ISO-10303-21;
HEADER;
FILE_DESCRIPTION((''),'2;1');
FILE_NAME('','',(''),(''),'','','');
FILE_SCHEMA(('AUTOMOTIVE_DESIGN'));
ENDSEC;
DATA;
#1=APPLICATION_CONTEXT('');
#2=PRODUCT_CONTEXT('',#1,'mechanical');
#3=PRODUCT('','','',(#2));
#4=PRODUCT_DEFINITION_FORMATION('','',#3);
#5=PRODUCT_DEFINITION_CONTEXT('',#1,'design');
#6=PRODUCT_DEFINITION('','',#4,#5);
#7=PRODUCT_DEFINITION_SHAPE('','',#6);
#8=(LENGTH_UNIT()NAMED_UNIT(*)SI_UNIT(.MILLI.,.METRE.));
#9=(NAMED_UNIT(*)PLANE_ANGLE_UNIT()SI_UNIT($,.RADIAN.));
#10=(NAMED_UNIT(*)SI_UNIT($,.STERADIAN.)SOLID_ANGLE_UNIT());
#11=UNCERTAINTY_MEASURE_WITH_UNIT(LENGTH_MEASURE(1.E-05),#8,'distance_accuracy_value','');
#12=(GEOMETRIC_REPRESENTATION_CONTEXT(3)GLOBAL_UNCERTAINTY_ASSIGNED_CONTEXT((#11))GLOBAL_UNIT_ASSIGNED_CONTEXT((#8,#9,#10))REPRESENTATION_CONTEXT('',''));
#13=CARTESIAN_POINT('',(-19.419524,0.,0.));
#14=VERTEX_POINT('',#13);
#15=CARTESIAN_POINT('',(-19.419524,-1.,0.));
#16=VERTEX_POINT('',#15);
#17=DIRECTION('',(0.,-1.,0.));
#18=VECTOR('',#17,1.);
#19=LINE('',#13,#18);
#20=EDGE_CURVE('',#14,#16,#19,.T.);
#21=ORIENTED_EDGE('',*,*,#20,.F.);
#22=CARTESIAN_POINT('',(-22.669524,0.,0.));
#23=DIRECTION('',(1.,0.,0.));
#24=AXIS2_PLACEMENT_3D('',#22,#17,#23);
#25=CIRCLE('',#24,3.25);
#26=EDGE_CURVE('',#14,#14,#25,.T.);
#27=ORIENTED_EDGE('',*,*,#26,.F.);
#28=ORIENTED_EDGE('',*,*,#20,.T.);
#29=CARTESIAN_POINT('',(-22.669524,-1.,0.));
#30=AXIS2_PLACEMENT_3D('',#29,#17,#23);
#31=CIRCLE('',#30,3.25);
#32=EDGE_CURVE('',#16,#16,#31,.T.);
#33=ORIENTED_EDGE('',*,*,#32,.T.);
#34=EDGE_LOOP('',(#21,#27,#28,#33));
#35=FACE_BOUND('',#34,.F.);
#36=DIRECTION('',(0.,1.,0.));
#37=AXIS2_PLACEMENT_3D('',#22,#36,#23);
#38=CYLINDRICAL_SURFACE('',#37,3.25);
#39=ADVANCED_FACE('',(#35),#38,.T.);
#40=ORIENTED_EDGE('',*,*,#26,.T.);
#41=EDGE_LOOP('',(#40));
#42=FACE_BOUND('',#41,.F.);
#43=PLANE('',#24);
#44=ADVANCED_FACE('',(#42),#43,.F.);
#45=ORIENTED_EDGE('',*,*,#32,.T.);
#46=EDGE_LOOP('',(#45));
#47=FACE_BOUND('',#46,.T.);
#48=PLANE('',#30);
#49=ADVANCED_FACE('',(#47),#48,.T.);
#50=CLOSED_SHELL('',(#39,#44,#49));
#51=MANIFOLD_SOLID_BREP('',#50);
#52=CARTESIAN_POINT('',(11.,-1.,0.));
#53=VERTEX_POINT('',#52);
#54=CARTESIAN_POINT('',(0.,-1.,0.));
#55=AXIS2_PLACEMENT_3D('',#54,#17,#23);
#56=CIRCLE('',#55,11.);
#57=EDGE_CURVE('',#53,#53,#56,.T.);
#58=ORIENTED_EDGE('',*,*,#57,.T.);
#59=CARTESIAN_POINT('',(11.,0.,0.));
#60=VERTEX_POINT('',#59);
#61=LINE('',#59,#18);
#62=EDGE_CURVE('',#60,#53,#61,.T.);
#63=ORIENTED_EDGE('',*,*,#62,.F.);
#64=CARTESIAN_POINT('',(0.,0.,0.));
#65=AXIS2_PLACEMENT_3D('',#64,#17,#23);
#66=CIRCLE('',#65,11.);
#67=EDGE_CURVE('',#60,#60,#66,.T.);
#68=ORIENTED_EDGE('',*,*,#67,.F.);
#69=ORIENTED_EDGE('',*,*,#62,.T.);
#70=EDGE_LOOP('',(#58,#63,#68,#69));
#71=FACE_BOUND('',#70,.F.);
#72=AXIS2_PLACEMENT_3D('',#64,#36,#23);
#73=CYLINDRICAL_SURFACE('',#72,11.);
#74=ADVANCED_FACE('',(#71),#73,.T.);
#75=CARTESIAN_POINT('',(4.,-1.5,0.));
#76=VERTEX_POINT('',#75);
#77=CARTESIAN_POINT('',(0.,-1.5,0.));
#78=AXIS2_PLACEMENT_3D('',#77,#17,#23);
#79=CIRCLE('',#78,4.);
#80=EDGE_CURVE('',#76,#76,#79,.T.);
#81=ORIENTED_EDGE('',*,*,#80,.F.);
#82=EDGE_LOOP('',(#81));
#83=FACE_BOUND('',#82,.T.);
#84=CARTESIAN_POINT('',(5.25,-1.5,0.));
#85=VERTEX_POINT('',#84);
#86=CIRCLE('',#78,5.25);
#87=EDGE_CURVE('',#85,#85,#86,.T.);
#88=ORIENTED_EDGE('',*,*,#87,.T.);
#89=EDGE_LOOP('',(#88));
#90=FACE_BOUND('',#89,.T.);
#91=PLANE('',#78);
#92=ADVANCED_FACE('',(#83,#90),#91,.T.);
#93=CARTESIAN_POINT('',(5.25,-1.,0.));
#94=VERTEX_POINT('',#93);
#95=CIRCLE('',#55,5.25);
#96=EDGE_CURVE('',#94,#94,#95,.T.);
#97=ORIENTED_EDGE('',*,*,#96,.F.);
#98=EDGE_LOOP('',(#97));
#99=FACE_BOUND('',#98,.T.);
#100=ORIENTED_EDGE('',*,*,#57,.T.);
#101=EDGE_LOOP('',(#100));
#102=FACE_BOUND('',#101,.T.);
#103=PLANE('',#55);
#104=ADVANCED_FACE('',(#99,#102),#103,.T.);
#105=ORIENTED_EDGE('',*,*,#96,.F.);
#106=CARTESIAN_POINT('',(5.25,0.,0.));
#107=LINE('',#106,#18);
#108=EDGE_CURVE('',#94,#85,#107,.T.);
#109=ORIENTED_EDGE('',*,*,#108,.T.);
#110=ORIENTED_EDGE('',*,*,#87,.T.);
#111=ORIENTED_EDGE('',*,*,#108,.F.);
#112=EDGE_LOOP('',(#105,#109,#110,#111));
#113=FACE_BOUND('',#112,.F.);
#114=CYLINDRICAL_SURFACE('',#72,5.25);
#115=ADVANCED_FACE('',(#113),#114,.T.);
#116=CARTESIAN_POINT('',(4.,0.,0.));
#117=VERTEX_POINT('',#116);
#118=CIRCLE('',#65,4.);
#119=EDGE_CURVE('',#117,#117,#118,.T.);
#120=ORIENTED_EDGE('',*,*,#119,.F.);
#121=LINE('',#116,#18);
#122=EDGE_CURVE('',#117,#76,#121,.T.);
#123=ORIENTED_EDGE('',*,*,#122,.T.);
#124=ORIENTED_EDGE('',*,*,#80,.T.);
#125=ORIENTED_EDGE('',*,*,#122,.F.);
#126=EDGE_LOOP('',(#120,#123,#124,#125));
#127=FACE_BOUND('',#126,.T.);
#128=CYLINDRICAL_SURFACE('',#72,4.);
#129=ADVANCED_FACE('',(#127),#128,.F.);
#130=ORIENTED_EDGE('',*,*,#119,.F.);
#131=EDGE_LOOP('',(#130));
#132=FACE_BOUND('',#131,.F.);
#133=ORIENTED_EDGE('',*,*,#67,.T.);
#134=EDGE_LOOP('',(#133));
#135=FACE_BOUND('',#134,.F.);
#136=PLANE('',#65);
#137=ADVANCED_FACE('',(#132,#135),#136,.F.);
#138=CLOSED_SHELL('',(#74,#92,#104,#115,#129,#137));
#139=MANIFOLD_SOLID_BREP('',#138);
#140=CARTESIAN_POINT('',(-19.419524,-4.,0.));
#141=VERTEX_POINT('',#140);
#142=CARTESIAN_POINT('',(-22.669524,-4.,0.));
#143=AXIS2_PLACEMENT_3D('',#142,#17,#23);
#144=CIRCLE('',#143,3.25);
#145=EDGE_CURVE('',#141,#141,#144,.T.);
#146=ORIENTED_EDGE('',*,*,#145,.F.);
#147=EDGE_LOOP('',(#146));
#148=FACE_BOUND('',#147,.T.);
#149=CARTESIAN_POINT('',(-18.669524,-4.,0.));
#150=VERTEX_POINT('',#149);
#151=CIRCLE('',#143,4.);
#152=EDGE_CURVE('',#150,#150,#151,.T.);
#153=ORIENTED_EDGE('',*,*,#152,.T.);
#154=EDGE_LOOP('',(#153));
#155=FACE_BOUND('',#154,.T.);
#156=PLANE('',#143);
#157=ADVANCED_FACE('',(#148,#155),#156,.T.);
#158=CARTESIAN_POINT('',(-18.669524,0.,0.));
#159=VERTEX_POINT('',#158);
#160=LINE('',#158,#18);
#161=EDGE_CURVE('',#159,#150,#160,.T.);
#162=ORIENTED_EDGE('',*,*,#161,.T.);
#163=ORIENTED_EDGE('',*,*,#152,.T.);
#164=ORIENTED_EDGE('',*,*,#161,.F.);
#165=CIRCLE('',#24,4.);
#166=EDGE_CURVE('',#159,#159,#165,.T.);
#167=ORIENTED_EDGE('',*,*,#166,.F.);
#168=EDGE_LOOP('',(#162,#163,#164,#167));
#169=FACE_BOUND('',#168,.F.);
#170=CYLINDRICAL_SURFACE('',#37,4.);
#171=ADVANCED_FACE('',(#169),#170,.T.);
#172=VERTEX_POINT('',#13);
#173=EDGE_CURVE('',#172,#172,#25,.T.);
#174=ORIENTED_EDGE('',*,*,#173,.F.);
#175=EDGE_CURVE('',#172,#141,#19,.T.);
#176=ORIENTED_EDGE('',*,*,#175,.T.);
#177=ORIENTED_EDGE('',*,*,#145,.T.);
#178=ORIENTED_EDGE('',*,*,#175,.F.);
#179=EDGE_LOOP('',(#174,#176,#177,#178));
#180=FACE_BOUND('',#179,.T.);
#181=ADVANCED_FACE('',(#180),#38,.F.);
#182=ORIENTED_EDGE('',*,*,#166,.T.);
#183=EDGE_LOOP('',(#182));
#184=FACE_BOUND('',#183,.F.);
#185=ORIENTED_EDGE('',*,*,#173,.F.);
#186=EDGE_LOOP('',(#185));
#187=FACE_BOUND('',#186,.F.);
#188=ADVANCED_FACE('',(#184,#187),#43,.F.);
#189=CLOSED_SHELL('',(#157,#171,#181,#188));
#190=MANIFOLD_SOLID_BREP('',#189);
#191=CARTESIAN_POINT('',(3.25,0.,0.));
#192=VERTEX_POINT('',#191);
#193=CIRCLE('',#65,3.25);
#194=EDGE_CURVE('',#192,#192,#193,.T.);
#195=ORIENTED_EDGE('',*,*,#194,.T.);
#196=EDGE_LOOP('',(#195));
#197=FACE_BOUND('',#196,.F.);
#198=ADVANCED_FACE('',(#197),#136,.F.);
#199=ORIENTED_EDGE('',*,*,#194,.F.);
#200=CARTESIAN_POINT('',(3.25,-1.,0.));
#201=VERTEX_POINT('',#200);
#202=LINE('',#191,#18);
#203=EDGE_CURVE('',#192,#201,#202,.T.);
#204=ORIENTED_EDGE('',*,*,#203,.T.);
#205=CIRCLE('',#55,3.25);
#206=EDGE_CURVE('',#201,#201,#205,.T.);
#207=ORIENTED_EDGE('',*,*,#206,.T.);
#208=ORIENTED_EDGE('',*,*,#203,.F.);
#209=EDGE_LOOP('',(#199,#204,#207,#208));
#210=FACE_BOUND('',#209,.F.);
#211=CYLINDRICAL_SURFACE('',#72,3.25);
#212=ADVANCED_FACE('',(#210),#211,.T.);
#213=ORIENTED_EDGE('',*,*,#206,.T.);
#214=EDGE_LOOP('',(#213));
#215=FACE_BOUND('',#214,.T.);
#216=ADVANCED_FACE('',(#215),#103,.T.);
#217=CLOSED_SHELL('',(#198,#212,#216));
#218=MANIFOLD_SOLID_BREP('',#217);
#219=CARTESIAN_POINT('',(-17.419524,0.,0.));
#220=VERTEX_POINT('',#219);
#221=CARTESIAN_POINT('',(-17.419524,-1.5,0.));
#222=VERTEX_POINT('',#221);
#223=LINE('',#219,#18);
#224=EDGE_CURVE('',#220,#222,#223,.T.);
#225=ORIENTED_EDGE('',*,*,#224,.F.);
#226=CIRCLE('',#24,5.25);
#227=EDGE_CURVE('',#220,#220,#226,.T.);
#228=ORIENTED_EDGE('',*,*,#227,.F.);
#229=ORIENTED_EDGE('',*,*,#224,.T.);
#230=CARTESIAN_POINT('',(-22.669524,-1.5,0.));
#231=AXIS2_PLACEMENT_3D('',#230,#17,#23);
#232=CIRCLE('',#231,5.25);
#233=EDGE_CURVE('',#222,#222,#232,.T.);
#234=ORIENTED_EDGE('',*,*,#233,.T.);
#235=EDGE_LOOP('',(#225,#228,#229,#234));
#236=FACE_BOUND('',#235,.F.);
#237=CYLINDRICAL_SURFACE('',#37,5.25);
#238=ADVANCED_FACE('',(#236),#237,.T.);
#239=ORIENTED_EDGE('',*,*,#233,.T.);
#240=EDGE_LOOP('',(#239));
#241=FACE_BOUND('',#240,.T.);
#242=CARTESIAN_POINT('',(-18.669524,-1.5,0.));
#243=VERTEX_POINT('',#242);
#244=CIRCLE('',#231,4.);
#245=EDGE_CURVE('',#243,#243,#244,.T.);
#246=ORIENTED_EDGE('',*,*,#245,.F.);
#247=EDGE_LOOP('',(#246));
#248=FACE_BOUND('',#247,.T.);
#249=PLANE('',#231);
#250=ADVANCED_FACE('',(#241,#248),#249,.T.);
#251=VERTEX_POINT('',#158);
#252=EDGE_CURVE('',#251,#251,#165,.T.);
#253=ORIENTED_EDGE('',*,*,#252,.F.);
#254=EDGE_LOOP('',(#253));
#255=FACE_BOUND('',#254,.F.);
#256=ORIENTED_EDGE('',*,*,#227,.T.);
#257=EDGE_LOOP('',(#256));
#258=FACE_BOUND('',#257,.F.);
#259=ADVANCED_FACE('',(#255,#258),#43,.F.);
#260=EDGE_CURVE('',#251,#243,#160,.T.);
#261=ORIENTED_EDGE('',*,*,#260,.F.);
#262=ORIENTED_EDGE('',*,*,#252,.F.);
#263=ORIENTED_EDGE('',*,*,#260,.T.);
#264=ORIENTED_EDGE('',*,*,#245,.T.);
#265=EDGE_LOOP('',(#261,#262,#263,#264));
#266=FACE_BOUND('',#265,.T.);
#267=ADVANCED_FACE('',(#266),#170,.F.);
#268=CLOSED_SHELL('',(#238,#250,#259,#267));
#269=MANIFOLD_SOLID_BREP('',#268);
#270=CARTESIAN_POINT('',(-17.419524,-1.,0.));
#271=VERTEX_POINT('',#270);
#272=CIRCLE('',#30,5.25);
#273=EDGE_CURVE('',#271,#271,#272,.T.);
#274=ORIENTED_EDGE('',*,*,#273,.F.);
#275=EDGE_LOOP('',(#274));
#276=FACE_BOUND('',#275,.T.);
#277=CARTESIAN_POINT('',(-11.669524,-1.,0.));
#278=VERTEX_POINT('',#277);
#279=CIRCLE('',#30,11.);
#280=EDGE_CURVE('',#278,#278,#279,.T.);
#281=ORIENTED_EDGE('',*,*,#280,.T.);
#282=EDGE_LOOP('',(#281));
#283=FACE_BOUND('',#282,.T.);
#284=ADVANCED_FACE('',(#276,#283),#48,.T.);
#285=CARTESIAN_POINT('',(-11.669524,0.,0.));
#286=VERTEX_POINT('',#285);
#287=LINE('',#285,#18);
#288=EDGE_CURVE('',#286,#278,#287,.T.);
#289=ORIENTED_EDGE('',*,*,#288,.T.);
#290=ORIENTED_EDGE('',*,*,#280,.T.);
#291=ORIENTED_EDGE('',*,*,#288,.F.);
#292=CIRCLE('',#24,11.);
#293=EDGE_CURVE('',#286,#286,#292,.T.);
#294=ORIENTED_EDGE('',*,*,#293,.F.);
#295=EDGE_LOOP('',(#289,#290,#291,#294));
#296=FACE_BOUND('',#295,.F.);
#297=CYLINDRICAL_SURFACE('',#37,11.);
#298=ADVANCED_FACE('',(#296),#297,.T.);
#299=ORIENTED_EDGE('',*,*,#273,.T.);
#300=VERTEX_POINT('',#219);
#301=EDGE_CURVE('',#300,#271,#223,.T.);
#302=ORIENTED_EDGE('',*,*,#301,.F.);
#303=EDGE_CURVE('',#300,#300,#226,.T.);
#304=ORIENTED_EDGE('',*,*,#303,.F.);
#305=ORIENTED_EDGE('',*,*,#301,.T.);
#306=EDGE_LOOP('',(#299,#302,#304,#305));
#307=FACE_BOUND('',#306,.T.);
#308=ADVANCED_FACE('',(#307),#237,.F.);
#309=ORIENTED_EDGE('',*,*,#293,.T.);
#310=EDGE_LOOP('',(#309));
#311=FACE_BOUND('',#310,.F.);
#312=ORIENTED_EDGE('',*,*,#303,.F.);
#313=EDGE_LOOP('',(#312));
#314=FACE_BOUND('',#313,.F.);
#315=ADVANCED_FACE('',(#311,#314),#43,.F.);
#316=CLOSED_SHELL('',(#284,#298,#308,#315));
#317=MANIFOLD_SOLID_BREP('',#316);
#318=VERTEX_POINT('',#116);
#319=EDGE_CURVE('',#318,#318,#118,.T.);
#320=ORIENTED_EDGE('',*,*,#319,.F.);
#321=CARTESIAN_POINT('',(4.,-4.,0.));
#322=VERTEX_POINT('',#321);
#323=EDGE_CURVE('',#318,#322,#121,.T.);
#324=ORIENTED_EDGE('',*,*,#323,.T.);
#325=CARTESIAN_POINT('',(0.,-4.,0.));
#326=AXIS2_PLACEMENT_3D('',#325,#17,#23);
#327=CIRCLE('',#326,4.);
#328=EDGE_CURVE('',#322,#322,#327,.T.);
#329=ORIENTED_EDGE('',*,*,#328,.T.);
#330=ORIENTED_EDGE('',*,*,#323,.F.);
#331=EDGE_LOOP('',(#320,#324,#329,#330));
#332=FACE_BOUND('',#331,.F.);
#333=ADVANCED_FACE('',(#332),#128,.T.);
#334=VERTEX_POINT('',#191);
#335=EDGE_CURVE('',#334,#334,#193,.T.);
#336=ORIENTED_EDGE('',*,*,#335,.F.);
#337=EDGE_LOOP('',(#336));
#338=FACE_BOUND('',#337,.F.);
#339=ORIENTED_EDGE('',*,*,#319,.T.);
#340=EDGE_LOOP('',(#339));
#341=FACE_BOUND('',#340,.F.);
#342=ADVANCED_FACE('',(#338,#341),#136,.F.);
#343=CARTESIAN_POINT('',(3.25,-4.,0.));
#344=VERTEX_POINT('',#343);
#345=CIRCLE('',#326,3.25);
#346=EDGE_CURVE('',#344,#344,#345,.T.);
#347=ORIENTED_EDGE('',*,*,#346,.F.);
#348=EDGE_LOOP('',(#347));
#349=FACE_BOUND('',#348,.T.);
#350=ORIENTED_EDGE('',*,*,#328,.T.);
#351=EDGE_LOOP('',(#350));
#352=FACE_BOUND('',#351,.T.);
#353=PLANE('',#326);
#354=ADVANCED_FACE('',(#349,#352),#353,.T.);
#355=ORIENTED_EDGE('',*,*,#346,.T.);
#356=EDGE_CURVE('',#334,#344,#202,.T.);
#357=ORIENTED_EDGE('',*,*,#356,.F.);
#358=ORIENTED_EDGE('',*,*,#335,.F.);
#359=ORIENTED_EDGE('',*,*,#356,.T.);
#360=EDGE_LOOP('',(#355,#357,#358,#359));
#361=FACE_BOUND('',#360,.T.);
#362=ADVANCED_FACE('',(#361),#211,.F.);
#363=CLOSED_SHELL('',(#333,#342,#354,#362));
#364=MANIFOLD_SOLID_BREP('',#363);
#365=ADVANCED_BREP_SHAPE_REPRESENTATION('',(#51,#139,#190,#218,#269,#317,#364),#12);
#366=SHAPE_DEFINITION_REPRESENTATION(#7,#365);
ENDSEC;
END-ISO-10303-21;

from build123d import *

# Parameters (mm, degrees)
F0_R     = 11
F0_R_2   = 5.25
F1_DEPTH = 1
F0_R_3   = 3.25
F0_R_4   = 4
F2_DEPTH = 1.5
F3_DEPTH = 4


with BuildPart() as f1:
    # F0 (on Front) → F1 (new body)
    with BuildSketch(Plane.XZ):
        Circle(F0_R)
        Circle(F0_R_2, mode=Mode.SUBTRACT)
    extrude(amount=F1_DEPTH)

    # F0 (on Front) → F2 (join)
    with BuildSketch(Plane.XZ):
        Circle(F0_R_2)
        Circle(F0_R_4, mode=Mode.SUBTRACT)
    extrude(amount=F2_DEPTH)


with BuildPart() as f1b:
    # F0 (on Front) → F1, piece 2 (new body)
    with BuildSketch(Plane.XZ):
        Circle(F0_R_3)
    extrude(amount=F1_DEPTH)


with BuildPart() as f1c:
    # F0 (on Front) → F1, piece 3 (new body)
    with BuildSketch(Plane.XZ):
        with Locations((-22.6695239544, 0)):
            Circle(F0_R)
        with Locations((-22.6695239544, 0)):
            Circle(F0_R_2, mode=Mode.SUBTRACT)
    extrude(amount=F1_DEPTH)


with BuildPart() as f1d:
    # F0 (on Front) → F1, piece 4 (new body)
    with BuildSketch(Plane.XZ):
        with Locations((-22.6695239544, 0)):
            Circle(F0_R_3)
    extrude(amount=F1_DEPTH)


with BuildPart() as f2:
    # F0 (on Front) → F2, piece 2 (new body)
    with BuildSketch(Plane.XZ):
        with Locations((-22.6695239544, 0)):
            Circle(F0_R_2)
        with Locations((-22.6695239544, 0)):
            Circle(F0_R_4, mode=Mode.SUBTRACT)
    extrude(amount=F2_DEPTH)


with BuildPart() as f3:
    # F0 (on Front) → F3 (new body)
    with BuildSketch(Plane.XZ):
        Circle(F0_R_4)
        Circle(F0_R_3, mode=Mode.SUBTRACT)
    extrude(amount=F3_DEPTH)


with BuildPart() as f3b:
    # F0 (on Front) → F3, piece 2 (new body)
    with BuildSketch(Plane.XZ):
        with Locations((-22.6695239544, 0)):
            Circle(F0_R_4)
        with Locations((-22.6695239544, 0)):
            Circle(F0_R_3, mode=Mode.SUBTRACT)
    extrude(amount=F3_DEPTH)


solid = Compound([f1.part, f1b.part, f1c.part, f1d.part, f2.part, f3.part, f3b.part])
